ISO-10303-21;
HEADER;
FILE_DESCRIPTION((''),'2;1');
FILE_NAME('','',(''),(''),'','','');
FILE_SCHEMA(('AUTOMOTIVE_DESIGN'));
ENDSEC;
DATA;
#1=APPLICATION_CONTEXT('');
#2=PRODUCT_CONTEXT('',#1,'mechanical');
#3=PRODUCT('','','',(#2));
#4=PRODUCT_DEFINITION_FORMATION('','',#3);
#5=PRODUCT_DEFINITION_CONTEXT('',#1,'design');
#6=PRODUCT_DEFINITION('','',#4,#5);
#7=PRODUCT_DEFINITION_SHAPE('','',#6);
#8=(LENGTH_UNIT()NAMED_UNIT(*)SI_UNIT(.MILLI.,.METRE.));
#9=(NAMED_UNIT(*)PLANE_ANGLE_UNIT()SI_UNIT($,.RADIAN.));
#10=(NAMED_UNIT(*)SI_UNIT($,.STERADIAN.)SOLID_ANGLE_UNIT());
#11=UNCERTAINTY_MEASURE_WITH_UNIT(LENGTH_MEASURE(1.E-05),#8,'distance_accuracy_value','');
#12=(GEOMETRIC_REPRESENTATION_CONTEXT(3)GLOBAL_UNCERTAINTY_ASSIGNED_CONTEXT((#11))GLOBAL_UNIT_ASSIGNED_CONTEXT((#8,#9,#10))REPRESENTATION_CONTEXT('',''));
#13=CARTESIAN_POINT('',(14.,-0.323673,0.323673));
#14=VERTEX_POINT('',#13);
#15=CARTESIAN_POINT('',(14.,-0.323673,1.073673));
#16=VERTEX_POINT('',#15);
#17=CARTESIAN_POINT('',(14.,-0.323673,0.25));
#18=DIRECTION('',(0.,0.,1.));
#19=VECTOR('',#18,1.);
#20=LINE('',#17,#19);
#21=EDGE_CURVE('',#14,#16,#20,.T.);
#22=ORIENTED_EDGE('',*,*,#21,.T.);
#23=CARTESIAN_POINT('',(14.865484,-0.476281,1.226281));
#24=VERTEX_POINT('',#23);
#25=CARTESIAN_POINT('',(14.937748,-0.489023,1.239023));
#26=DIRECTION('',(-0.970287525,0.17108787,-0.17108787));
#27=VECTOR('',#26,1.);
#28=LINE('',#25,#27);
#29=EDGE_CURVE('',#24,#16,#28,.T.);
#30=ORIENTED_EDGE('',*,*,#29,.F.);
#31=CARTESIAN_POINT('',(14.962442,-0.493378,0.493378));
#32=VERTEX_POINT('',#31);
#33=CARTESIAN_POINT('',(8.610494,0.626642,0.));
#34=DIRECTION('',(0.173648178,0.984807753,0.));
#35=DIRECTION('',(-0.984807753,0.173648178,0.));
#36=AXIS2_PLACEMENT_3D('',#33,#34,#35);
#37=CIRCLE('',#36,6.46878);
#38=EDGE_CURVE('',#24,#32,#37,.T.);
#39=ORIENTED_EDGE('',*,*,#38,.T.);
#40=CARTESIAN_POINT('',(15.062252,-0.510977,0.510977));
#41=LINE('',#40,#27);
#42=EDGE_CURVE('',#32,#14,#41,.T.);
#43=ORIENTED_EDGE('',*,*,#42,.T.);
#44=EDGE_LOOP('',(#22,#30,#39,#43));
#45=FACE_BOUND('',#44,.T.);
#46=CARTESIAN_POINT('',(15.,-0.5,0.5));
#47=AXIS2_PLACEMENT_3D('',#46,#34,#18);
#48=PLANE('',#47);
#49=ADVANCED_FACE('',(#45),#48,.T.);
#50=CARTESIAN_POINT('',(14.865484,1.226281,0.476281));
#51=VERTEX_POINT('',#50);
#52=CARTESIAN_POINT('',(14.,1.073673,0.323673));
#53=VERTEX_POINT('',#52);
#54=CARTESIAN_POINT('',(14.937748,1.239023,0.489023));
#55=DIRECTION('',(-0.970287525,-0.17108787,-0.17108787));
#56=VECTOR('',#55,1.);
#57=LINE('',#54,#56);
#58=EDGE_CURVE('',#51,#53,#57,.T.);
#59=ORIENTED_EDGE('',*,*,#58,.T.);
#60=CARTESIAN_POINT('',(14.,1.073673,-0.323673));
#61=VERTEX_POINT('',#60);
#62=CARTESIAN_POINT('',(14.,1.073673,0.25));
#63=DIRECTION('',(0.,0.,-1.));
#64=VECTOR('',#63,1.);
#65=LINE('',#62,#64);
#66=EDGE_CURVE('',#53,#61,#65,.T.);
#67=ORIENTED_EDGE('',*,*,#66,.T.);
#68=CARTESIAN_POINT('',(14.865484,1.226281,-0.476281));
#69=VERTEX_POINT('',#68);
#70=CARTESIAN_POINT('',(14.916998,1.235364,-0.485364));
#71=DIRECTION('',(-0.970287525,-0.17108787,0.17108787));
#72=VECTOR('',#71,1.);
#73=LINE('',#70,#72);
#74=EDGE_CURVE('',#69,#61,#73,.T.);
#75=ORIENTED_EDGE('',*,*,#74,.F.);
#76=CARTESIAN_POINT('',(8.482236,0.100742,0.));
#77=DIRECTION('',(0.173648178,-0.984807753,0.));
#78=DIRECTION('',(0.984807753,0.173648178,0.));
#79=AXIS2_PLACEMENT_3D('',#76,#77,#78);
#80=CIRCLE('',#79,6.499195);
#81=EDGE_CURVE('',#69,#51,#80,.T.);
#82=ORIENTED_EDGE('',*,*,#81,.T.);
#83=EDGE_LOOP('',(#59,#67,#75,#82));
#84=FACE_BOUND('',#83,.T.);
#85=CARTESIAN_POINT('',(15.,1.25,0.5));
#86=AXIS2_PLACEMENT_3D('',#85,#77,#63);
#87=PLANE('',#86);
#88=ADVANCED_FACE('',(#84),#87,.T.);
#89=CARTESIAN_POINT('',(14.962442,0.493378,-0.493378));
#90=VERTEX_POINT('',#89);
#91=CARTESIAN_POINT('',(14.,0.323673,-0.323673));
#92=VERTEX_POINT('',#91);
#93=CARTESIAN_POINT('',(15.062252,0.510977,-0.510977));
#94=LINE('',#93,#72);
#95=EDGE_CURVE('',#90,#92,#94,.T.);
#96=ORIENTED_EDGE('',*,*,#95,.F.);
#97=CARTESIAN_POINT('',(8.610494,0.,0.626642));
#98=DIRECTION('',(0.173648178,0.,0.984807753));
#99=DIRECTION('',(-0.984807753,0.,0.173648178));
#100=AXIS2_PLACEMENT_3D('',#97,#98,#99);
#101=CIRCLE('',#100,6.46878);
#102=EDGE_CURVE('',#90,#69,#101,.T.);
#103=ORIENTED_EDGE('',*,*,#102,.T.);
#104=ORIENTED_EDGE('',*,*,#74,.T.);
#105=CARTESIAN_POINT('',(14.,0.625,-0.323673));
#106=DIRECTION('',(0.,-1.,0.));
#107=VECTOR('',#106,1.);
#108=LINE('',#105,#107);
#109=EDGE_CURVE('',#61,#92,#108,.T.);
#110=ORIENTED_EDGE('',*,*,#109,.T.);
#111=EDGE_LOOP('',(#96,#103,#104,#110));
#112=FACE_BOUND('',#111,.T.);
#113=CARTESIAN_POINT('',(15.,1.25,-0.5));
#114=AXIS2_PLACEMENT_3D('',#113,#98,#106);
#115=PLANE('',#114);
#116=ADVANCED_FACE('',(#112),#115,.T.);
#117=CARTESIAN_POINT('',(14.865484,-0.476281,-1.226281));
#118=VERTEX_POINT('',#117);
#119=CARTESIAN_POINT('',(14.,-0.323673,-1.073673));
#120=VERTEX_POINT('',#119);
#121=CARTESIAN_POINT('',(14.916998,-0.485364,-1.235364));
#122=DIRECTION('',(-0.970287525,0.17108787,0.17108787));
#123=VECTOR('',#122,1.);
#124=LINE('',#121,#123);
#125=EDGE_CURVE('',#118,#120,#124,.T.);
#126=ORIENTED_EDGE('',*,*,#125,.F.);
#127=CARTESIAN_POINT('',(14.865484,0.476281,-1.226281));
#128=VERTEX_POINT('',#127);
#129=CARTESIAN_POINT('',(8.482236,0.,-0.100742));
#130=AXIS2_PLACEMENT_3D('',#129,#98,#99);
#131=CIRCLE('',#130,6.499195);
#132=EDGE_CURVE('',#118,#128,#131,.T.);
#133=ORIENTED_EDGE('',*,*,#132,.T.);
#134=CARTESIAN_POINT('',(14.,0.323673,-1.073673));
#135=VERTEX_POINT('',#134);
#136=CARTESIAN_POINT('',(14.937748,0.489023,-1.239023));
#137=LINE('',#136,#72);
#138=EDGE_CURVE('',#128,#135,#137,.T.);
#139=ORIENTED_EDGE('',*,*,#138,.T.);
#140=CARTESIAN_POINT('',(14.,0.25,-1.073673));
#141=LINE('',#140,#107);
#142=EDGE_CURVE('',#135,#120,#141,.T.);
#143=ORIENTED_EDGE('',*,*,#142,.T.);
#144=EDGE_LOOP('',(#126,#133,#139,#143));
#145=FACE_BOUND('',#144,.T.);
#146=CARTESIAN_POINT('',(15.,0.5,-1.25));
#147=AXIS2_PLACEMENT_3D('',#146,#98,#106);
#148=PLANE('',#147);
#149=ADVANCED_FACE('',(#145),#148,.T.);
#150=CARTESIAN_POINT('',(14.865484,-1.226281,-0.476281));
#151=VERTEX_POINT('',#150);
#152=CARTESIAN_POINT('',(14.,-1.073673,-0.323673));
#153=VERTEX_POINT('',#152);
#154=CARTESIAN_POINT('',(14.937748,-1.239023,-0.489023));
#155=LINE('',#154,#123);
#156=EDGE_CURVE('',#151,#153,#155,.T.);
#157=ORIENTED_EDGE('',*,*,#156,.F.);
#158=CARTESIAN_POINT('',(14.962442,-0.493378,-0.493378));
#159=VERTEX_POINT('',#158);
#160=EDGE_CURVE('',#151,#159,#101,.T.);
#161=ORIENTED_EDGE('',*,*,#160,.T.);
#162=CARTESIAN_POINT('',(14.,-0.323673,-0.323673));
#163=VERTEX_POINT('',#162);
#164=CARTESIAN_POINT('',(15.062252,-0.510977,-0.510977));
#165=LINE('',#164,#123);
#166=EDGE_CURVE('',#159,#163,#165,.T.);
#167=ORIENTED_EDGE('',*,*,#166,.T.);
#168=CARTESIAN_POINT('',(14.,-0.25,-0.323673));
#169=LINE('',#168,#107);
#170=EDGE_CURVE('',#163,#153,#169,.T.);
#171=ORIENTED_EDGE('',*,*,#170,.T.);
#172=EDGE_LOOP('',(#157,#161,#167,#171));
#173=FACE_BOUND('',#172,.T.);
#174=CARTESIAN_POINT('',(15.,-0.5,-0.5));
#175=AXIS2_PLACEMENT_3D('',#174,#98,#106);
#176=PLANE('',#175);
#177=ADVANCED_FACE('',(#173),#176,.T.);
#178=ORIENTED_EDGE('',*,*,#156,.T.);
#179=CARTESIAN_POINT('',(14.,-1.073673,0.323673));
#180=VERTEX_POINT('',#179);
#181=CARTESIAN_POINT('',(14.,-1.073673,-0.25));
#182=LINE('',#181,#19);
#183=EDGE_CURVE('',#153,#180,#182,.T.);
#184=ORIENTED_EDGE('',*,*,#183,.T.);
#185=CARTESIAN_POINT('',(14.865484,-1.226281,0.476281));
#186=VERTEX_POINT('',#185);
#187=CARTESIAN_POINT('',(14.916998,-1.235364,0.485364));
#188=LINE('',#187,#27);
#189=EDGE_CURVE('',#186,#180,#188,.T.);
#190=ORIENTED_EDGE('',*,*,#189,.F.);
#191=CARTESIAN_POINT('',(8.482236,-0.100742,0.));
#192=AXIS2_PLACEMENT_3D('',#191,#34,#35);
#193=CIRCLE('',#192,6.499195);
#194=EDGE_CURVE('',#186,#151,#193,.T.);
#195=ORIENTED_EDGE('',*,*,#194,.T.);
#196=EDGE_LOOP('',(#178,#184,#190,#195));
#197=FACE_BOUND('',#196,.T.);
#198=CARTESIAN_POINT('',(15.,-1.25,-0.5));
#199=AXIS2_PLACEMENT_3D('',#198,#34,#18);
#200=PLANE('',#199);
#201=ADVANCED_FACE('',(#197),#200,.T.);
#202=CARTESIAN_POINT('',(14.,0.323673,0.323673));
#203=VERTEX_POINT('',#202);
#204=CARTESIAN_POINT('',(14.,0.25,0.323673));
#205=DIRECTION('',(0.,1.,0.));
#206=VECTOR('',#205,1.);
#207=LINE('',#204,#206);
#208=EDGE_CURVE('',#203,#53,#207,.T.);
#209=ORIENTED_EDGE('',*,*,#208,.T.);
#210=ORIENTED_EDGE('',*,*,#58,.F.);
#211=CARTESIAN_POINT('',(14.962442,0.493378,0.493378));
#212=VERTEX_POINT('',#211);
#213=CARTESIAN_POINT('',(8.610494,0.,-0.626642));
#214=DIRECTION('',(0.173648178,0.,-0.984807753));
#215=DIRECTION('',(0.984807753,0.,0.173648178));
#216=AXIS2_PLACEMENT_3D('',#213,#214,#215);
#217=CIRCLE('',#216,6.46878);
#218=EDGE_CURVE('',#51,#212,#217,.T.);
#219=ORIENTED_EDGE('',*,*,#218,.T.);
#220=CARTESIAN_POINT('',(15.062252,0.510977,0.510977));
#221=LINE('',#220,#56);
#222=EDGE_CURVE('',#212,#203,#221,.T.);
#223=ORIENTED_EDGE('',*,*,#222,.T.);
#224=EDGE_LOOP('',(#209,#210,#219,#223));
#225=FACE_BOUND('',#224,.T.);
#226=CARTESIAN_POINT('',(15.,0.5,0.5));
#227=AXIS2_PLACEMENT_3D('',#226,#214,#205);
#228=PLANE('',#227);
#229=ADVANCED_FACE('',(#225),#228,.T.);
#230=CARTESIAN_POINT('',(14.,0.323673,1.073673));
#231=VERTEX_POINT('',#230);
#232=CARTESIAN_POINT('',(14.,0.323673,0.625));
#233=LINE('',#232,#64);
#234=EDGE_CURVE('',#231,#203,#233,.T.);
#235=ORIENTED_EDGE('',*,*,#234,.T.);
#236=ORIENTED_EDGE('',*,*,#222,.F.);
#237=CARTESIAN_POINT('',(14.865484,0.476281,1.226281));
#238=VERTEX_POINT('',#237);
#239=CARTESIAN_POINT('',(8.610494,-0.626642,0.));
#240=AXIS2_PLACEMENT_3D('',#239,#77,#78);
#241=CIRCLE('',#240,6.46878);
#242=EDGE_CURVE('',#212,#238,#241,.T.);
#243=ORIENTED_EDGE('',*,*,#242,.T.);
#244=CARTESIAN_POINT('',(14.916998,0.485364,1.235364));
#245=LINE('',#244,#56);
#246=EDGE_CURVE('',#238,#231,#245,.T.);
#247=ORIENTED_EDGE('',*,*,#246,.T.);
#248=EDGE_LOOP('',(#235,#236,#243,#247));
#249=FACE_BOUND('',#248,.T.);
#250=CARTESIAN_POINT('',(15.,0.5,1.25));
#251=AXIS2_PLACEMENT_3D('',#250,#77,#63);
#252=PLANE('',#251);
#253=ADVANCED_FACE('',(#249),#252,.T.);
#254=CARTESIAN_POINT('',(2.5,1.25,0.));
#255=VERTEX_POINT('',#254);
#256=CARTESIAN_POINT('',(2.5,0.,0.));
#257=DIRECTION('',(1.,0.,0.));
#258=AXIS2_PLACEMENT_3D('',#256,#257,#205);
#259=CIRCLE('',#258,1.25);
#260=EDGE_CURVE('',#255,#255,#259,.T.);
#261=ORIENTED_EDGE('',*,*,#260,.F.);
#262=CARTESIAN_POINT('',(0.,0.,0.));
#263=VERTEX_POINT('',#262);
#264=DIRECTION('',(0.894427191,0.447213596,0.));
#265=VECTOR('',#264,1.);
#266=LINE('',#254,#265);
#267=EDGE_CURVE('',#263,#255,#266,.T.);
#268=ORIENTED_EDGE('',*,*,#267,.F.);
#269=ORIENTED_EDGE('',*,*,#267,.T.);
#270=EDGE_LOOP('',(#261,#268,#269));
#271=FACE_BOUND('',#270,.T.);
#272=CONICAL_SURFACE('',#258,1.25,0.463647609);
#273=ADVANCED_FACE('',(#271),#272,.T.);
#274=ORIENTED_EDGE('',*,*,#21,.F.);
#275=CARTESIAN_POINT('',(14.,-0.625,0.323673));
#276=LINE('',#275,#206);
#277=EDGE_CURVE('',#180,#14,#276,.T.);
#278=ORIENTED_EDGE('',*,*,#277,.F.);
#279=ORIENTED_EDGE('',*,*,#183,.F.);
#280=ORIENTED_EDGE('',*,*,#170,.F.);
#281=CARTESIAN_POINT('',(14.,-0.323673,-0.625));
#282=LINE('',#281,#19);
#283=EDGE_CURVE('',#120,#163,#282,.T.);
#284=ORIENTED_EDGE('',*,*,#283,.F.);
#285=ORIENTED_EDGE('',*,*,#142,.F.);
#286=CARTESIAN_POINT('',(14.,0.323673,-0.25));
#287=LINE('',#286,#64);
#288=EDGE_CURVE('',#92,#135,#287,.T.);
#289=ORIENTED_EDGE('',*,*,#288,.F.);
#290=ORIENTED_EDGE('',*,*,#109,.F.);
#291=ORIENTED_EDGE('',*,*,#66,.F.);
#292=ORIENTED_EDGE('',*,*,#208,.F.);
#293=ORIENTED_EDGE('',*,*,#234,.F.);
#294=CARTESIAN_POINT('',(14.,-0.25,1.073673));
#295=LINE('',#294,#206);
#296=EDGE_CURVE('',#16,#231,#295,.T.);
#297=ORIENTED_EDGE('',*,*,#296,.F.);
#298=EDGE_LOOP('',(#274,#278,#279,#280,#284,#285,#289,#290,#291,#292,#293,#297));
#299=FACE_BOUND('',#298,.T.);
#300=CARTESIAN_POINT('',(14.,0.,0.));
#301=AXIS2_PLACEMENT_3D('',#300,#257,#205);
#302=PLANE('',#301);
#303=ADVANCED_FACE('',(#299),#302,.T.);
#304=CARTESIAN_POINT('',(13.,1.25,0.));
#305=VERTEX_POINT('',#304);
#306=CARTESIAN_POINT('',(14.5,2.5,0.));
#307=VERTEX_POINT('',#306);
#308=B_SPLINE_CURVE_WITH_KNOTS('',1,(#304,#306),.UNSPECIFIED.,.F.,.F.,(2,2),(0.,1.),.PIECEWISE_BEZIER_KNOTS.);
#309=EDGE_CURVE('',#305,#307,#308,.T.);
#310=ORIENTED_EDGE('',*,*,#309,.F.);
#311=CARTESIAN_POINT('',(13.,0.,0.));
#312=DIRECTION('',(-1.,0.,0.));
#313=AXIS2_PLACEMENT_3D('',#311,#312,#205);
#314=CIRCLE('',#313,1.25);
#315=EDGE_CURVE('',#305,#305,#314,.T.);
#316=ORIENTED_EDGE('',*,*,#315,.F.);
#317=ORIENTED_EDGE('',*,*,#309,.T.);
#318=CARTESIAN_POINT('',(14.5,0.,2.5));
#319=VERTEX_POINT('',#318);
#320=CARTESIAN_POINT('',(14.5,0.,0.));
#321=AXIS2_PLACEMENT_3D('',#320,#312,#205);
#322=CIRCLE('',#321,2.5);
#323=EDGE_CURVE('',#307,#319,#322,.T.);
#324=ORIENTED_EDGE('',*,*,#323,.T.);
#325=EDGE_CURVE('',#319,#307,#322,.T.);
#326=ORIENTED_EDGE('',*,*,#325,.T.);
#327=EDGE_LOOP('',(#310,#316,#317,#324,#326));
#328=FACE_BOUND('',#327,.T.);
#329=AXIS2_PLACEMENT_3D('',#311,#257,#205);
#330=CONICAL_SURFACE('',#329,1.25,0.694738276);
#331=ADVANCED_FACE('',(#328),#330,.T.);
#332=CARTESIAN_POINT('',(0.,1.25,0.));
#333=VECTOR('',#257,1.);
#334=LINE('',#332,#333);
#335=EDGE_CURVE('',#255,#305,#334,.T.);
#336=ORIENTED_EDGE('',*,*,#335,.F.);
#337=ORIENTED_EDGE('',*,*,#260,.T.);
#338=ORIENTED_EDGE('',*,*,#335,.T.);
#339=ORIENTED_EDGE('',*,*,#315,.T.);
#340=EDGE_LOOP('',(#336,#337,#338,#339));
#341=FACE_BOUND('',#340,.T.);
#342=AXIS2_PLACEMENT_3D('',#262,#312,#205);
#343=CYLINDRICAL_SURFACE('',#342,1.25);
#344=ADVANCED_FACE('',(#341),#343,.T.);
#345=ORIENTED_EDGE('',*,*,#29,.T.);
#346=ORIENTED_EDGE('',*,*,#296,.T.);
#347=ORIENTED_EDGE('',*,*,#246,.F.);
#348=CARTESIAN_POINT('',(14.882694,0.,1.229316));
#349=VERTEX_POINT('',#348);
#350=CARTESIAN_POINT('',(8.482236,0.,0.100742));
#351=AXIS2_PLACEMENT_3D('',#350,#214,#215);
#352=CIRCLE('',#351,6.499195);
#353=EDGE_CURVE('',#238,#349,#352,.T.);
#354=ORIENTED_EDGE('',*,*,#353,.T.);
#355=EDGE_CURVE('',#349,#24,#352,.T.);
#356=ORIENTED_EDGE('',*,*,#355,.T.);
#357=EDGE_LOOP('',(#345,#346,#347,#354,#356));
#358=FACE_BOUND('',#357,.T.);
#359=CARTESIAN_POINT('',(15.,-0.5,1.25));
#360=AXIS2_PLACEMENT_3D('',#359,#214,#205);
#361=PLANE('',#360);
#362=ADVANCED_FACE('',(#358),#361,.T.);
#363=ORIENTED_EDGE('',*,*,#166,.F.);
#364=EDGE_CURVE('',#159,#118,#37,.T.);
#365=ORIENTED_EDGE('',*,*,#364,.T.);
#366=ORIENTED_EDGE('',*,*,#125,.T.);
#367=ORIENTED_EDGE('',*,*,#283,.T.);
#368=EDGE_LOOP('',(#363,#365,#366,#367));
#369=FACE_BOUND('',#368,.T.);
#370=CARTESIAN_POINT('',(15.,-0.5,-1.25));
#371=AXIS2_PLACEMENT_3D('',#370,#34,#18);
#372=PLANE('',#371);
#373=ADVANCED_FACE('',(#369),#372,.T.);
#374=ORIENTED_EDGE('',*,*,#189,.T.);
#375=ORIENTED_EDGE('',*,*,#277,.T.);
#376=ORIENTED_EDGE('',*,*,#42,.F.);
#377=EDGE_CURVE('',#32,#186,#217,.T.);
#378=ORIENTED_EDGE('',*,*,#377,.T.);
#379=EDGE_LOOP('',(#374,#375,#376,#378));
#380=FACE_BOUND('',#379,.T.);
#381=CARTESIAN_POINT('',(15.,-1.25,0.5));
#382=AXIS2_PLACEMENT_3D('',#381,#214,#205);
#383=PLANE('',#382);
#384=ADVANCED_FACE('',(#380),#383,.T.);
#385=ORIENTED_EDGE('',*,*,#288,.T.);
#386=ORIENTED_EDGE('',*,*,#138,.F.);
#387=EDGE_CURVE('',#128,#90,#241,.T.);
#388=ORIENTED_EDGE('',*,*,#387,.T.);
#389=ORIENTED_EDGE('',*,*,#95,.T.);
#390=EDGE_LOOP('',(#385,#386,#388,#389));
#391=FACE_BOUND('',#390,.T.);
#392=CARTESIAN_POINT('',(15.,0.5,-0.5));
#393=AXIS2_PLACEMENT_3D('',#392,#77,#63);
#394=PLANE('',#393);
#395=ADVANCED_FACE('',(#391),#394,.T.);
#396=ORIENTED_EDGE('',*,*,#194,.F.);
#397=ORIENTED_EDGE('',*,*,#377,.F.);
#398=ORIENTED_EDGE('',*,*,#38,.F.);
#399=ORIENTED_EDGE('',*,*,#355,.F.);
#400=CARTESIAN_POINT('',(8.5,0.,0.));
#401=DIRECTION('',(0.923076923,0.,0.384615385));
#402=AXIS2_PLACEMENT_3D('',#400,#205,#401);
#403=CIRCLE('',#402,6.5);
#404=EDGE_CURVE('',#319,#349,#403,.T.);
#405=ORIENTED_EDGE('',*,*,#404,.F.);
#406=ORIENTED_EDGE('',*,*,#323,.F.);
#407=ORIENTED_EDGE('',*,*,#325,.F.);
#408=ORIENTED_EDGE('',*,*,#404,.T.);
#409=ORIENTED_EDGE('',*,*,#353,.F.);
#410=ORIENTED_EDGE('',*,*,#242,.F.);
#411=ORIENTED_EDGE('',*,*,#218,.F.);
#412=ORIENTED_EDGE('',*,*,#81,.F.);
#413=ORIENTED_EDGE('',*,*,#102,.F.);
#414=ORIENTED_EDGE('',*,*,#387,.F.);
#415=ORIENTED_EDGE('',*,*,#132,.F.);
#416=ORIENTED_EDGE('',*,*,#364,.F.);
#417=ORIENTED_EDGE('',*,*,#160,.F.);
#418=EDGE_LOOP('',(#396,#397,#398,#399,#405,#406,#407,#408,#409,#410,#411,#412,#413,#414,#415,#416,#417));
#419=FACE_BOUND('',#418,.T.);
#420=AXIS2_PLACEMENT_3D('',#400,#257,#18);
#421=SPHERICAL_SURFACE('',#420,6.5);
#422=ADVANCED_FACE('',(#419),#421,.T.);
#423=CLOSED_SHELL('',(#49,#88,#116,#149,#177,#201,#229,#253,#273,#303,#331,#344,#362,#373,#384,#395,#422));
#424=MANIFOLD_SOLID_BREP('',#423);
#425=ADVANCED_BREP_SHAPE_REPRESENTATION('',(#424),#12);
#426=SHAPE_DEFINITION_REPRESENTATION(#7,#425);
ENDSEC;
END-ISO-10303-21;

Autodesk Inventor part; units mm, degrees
ref_plane "XZ Plane" through (0, 0, 0) normal (0, 1, 0) x (-1, 0, 0)
sketch "Sketch1" plane through (0, 0, 0) normal (1, 0, 0) x (0, 1, 0)
  circle A0 centre (0, 0) radius 1.25
  dimension "d0" = 2.5
extrude "Extrusion1" add sketch "Sketch1" along normal blind 13
thread "Thread1" size "M2.5x0.45" class "6g" standard "ANSI Metric M Profile" full length
chamfer "Chamfer1" distance 1.25 distance2 2.5 1 edges at (0, -1.25, 0) measured on face at (0, -0.1478, -0.3896)
ref_plane "Work Plane1" through (14.5, 0, 0) normal (1, 0, 0) x (0, 0, -1)
sketch "Sketch2" plane through (14.5, 0, 0) normal (1, 0, 0) x (0, 0, -1)
  circle A0 centre (0, 0) radius 2.5
  dimension "d11" = 5
loft "Loft1" add profiles "Sketch2" section 1 edges at (13, -1.25, 0)
sketch "Sketch3" plane through (0, 0, 0) normal (0, 1, 0) x (-1, 0, 0)
  line L0 (-14.5, -2.5) -> (-14.5, 2.5) construction
  line L1 (-14.5, 0) -> (-15, 0)
  arc A0 (-14.5, 2.5) -> (-15, 0) centre (-8.5, 0) ccw
  line L2 (-14.5, 2.5) -> (-14.5, 0)
  line L3 (3.0248, 0) -> (-18.1485, 0) projected
  point P0 (0, 0)
  dimension "d16" = 0.5
revolve "Revolution1" add sketch "Sketch3" angle 360 about axis through (-10, 0, 0) along (1, 0, 0)
ref_plane "Work Plane2" through (15, 0, 0) normal (1, 0, 0) x (0, 1, 0)
sketch "Sketch4" plane through (15, 0, 0) normal (1, 0, 0) x (0, 1, 0)
  line L0 (1.25, 0.5) -> (1.25, -0.5)
  line L1 (-1.25, -0.5) -> (-1.25, 0.5)
  line L2 (0.5, -1.25) -> (-0.5, -1.25)
  line L3 (-0.5, 1.25) -> (0.5, 1.25)
  line L4 (-0.5, -1.25) -> (-0.5, -0.5)
  line L5 (-0.5, 0.5) -> (-0.5, 1.25)
  line L6 (1.25, -0.5) -> (0.5, -0.5)
  line L7 (-0.5, -0.5) -> (-1.25, -0.5)
  line L8 (0.5, 1.25) -> (0.5, 0.5)
  line L9 (0.5, -0.5) -> (0.5, -1.25)
  line L10 (-1.25, 0.5) -> (-0.5, 0.5)
  line L11 (0.5, 0.5) -> (1.25, 0.5)
  dimension "d18" = 2.5
  dimension "d19" = 1
  dimension "d20" = 1
  dimension "d21" = 2.5
extrude "Extrusion2" cut sketch "Sketch4" against normal blind 1 draft -10
properties part number "Parafuso do Plug P10"
